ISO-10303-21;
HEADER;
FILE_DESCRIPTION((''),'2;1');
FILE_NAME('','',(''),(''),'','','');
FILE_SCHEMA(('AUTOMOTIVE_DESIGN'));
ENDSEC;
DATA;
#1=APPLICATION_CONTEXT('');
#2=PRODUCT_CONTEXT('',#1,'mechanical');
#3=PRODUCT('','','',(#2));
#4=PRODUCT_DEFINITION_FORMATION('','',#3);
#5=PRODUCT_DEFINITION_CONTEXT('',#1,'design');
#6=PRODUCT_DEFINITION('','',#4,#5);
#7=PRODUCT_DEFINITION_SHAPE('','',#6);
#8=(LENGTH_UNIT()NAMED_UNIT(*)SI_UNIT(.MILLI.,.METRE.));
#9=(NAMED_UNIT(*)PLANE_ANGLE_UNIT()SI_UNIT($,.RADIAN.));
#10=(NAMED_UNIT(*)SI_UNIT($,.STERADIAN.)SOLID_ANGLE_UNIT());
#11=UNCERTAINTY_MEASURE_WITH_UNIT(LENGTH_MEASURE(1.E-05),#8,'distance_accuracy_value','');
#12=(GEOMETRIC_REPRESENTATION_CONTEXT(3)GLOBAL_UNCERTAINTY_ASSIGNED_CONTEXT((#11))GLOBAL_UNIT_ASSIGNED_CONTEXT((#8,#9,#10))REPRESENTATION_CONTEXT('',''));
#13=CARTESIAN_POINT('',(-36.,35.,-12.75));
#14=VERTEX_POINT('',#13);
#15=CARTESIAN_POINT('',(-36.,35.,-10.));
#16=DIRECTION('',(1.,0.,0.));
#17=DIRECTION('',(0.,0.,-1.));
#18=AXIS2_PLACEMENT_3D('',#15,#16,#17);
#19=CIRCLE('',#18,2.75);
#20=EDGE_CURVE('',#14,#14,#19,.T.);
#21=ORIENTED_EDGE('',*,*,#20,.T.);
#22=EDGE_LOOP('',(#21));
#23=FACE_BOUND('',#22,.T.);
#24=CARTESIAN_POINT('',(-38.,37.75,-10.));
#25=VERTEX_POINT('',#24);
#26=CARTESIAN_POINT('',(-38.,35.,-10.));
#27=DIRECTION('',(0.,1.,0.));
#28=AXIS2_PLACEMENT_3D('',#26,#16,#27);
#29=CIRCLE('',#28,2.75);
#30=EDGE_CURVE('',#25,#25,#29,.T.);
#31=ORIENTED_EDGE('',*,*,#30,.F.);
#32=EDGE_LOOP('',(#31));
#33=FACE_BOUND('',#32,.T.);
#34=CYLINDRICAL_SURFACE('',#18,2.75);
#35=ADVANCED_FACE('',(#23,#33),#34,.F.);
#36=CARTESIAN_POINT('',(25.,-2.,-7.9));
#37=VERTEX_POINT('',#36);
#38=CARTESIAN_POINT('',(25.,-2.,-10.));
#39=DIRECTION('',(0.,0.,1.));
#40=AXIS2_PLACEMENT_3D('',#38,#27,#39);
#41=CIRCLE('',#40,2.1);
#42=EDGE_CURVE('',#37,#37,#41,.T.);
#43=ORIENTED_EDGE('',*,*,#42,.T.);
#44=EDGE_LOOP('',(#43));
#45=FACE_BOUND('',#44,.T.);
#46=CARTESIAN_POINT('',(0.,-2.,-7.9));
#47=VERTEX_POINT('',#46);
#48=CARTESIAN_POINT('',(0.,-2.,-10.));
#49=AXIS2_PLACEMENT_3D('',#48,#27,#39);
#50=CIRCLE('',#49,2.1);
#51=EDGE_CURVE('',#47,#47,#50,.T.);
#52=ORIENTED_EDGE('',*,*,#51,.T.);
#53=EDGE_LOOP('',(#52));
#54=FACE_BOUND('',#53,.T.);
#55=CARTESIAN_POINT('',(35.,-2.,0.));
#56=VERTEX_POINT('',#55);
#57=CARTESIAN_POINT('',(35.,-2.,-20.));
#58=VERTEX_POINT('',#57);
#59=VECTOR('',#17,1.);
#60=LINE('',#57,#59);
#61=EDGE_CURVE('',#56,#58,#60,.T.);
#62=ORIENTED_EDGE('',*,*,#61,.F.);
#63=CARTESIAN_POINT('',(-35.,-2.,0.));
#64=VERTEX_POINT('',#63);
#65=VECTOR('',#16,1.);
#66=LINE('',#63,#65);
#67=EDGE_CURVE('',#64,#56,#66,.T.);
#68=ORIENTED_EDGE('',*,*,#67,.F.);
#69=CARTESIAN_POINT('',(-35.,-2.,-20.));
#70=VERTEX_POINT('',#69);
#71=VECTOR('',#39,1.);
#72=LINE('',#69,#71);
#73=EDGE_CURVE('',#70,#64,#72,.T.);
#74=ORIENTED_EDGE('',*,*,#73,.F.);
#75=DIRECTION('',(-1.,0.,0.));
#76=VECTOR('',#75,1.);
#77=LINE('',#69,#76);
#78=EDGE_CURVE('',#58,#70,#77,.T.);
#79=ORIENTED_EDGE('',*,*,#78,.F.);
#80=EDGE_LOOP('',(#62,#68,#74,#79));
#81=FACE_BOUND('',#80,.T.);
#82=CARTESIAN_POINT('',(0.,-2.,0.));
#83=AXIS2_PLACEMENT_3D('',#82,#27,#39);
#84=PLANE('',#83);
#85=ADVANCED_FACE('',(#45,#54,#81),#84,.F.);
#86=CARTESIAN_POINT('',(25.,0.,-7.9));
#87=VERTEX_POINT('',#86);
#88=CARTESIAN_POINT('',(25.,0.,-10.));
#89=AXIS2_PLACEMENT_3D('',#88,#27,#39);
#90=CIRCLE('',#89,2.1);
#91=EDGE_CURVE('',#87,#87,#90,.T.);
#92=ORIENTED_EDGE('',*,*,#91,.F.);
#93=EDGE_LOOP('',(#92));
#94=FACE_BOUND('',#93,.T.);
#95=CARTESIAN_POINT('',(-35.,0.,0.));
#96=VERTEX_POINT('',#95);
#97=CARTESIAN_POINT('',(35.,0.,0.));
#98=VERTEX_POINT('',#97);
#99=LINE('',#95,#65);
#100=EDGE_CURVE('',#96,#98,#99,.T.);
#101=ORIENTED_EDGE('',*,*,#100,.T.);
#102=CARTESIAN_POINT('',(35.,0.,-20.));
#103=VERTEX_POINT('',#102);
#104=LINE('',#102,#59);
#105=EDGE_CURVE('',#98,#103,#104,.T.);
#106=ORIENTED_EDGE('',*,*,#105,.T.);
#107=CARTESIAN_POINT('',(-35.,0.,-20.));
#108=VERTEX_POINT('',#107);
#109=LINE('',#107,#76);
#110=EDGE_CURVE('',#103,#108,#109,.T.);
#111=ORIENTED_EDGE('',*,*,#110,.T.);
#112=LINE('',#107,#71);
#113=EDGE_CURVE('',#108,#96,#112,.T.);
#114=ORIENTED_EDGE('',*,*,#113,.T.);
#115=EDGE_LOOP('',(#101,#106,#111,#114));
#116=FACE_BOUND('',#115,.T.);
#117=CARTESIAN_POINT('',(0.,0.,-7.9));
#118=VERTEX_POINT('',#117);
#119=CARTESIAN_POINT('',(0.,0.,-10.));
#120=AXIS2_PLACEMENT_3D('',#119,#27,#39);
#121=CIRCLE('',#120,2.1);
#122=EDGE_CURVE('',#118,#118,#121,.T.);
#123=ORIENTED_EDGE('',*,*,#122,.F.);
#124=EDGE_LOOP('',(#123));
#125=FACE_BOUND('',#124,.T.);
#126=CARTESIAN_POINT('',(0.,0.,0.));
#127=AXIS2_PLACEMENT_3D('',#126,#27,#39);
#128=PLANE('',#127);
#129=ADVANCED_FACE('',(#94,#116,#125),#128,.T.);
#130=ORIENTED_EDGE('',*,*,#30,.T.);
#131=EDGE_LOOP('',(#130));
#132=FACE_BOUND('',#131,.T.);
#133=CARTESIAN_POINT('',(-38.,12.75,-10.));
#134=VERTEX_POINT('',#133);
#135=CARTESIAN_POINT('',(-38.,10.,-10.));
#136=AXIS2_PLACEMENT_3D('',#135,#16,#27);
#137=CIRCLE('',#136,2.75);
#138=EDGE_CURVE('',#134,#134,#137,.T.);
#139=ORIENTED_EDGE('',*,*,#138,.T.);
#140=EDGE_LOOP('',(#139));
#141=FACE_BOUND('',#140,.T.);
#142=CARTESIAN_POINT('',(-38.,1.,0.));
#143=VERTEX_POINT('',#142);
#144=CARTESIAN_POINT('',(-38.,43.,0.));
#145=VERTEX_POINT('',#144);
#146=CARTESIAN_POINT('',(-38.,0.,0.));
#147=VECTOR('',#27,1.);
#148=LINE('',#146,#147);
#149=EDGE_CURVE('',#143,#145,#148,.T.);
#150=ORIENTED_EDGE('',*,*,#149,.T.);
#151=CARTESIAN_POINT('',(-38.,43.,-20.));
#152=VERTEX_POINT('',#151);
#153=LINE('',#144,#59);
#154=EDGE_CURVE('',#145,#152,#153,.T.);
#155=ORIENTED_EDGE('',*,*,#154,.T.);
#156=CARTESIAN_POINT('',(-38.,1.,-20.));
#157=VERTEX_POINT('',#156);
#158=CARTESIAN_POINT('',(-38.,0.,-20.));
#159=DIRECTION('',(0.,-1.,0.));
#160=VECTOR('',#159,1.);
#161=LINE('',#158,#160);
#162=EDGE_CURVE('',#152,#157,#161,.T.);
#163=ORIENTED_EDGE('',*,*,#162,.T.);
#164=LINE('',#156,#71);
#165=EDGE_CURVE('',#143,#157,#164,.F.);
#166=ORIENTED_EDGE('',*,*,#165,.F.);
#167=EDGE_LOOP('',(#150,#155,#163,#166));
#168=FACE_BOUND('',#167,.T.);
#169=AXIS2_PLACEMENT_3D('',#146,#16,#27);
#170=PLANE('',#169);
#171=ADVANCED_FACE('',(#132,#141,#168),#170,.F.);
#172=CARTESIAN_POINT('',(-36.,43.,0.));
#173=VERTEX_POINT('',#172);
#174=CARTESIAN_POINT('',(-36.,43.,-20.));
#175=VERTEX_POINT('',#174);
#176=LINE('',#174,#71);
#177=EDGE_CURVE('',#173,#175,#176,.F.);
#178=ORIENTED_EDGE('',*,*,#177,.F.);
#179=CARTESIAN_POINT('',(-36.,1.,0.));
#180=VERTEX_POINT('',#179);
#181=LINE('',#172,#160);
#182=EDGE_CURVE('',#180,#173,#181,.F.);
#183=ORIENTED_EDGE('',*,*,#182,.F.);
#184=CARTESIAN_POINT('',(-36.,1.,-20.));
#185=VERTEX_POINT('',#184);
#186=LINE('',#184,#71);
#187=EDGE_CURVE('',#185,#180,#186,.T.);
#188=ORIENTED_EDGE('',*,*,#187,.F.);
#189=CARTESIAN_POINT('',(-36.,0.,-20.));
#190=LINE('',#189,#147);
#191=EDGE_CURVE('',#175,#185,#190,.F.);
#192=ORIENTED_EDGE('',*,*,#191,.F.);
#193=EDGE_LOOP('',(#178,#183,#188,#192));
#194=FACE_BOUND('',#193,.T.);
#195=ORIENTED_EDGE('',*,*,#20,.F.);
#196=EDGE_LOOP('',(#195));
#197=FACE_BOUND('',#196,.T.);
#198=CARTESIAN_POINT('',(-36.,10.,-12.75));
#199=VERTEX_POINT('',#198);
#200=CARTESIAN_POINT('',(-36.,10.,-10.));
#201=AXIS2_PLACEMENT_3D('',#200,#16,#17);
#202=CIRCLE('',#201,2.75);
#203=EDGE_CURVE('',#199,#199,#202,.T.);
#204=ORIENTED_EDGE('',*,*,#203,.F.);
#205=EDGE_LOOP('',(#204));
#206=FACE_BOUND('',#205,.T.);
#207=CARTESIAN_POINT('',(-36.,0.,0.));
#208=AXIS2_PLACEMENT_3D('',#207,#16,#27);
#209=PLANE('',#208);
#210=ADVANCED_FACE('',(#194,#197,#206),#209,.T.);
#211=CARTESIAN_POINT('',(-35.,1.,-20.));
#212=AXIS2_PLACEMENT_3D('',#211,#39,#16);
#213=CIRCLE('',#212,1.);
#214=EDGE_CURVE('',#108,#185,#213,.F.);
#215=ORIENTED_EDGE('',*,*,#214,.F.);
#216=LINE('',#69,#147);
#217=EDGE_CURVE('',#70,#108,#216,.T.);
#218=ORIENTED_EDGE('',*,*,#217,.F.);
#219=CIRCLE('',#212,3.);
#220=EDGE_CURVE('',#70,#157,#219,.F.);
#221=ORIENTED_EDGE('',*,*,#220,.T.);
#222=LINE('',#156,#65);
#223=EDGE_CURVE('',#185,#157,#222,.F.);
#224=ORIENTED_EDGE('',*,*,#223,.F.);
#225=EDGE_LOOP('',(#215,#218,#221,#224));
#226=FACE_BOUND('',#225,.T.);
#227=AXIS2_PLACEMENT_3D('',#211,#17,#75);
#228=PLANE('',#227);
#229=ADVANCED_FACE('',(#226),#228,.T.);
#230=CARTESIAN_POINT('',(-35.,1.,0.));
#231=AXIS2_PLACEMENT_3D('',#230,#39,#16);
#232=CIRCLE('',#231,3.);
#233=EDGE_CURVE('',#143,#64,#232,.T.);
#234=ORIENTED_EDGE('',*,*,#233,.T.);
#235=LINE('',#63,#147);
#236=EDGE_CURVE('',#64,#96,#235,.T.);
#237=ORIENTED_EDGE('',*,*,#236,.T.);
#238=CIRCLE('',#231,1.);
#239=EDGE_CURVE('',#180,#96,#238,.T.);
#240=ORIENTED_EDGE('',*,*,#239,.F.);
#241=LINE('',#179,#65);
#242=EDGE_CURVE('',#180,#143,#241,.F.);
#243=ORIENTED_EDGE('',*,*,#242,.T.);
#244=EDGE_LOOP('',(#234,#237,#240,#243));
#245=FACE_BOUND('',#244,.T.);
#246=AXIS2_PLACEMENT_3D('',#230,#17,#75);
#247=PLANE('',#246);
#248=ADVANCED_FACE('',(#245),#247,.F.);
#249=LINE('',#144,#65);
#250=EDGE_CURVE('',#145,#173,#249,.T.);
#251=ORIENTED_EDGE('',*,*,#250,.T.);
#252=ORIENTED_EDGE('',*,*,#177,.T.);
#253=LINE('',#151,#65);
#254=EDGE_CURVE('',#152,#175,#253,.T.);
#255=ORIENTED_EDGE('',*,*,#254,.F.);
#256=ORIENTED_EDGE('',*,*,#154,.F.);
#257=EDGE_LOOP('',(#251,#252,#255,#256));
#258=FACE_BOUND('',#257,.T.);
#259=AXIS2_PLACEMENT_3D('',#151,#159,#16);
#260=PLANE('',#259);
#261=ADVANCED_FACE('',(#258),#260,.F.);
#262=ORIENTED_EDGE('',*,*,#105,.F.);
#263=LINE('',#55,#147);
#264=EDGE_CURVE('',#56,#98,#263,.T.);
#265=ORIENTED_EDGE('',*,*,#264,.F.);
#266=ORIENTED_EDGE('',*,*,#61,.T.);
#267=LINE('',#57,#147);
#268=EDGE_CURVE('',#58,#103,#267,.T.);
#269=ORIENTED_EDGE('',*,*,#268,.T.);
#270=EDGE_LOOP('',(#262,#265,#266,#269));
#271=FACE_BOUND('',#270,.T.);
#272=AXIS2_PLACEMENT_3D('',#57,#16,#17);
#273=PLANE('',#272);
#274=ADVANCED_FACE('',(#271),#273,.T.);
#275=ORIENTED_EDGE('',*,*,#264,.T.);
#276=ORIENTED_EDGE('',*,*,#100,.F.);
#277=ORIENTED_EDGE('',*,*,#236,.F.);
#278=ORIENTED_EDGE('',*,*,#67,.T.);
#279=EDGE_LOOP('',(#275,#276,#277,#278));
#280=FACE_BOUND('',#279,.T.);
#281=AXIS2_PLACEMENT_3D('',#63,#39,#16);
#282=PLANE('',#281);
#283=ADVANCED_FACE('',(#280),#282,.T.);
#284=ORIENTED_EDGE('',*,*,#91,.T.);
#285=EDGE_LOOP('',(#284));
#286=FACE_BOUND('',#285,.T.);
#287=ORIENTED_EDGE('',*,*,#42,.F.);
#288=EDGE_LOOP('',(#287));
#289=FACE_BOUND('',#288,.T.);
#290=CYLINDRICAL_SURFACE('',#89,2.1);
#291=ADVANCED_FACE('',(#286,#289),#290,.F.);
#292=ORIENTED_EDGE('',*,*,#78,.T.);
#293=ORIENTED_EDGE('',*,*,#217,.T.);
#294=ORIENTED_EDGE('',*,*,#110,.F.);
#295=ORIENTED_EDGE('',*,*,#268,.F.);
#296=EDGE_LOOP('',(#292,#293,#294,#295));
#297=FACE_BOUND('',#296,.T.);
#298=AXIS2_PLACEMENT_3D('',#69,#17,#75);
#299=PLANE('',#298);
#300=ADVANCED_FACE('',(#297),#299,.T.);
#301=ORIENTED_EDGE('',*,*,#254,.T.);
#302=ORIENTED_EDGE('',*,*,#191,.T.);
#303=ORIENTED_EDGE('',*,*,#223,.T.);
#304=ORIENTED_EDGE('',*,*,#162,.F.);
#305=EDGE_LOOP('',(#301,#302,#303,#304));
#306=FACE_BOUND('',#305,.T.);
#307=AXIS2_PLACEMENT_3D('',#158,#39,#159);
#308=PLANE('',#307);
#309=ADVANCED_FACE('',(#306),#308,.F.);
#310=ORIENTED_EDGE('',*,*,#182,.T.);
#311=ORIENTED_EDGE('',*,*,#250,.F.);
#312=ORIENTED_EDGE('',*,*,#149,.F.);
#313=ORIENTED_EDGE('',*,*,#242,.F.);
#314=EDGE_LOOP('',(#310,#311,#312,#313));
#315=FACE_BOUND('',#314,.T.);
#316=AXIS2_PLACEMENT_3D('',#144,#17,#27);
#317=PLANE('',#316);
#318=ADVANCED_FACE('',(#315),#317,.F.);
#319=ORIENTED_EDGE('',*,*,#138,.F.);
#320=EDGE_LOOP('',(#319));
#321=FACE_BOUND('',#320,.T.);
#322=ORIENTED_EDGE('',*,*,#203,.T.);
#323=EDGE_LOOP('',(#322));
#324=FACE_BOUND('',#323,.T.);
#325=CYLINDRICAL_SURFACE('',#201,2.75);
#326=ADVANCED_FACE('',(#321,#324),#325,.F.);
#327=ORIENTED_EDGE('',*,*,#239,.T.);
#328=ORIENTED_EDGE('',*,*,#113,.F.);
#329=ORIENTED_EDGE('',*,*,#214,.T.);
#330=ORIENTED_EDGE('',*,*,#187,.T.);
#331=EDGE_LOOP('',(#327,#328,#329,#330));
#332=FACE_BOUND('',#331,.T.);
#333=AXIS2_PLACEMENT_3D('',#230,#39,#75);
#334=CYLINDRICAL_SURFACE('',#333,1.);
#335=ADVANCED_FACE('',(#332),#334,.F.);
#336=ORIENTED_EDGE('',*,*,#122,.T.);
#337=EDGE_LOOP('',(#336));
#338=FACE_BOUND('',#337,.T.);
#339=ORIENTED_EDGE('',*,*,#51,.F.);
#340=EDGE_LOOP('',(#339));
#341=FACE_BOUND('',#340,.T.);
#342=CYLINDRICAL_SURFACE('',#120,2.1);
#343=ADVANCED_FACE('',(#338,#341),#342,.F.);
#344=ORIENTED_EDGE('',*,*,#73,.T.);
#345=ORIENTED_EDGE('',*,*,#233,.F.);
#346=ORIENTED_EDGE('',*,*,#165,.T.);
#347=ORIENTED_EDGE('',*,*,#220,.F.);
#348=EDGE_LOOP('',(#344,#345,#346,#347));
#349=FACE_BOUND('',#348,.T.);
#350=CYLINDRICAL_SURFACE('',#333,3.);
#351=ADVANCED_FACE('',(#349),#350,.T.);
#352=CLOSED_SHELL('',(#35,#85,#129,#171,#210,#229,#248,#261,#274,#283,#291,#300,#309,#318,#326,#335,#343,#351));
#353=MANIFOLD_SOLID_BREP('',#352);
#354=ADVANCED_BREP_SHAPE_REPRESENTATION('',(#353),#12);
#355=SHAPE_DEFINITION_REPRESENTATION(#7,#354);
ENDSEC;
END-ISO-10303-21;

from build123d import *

# Parameters (mm, degrees)
SKETCH_1_W             = 70
SKETCH_1_H             = 20
SM_BASE_FLANGE_1_DEPTH = 2
SM_EDGE_FLANGE_1_DEPTH = 20
MM_1_D                 = 5.5
MM_1_DEPTH             = 8
MM_1_TIP               = 1.652366702
HOLE_WIZARD_M5_1_D     = 4.2
HOLE_WIZARD_M5_1_DEPTH = 12.4
HOLE_WIZARD_M5_1_TIP   = 1.2618073


# Sheet-metal steps are written as plain solids
with BuildPart() as part:
    # Sketch 1 → 基体-法兰1 (new body)
    with BuildSketch(Plane(origin=(0, 0, 0), x_dir=(1, 0, 0), z_dir=(0, 1, 0))):
        with Locations((0, 10)):
            Rectangle(SKETCH_1_W, SKETCH_1_H)
    extrude(amount=-SM_BASE_FLANGE_1_DEPTH)

    # 边线-法兰1 section (across the edge) → 边线-法兰1 (add)
    with BuildSketch(Plane(origin=(-36, 0, -20), x_dir=(1, 0, 0), z_dir=(0, 0, 1))):
        with BuildLine():
            Line((-2, 1), (-2, 43))
            Line((-2, 43), (0, 43))
            Line((0, 43), (0, 1))
            ThreePointArc((0, 1), (0.292893219, 0.292893219), (1, 0))
            Line((1, 0), (1, -2))
            ThreePointArc((1, -2), (-1.121320344, -1.121320344), (-2, 1))
        make_face()
    extrude(amount=SM_EDGE_FLANGE_1_DEPTH)

    # 大小mm 暗销孔1
    with Locations(Plane(origin=(-36, 35, -10), x_dir=(0, 1, 0), z_dir=(1, 0, 0))):
        with Locations((0, 0), (-25, 0)):
            Hole(MM_1_D / 2, depth=MM_1_DEPTH)
            with Locations((0, 0, -(MM_1_DEPTH + MM_1_TIP / 2))):  # 118° drill point
                Cone(0, MM_1_D / 2, MM_1_TIP, mode=Mode.SUBTRACT)

    # M5 螺纹孔1
    with Locations(Plane(origin=(0, 0, -10), x_dir=(0, 0, 1), z_dir=(0, 1, 0))):
        with Locations((0, 0), (0, 25), (-27.106002663, 33.534976499)):
            Hole(HOLE_WIZARD_M5_1_D / 2, depth=HOLE_WIZARD_M5_1_DEPTH)
            with Locations((0, 0, -(HOLE_WIZARD_M5_1_DEPTH + HOLE_WIZARD_M5_1_TIP / 2))):  # 118° drill point
                Cone(0, HOLE_WIZARD_M5_1_D / 2, HOLE_WIZARD_M5_1_TIP, mode=Mode.SUBTRACT)


solid = part.part
